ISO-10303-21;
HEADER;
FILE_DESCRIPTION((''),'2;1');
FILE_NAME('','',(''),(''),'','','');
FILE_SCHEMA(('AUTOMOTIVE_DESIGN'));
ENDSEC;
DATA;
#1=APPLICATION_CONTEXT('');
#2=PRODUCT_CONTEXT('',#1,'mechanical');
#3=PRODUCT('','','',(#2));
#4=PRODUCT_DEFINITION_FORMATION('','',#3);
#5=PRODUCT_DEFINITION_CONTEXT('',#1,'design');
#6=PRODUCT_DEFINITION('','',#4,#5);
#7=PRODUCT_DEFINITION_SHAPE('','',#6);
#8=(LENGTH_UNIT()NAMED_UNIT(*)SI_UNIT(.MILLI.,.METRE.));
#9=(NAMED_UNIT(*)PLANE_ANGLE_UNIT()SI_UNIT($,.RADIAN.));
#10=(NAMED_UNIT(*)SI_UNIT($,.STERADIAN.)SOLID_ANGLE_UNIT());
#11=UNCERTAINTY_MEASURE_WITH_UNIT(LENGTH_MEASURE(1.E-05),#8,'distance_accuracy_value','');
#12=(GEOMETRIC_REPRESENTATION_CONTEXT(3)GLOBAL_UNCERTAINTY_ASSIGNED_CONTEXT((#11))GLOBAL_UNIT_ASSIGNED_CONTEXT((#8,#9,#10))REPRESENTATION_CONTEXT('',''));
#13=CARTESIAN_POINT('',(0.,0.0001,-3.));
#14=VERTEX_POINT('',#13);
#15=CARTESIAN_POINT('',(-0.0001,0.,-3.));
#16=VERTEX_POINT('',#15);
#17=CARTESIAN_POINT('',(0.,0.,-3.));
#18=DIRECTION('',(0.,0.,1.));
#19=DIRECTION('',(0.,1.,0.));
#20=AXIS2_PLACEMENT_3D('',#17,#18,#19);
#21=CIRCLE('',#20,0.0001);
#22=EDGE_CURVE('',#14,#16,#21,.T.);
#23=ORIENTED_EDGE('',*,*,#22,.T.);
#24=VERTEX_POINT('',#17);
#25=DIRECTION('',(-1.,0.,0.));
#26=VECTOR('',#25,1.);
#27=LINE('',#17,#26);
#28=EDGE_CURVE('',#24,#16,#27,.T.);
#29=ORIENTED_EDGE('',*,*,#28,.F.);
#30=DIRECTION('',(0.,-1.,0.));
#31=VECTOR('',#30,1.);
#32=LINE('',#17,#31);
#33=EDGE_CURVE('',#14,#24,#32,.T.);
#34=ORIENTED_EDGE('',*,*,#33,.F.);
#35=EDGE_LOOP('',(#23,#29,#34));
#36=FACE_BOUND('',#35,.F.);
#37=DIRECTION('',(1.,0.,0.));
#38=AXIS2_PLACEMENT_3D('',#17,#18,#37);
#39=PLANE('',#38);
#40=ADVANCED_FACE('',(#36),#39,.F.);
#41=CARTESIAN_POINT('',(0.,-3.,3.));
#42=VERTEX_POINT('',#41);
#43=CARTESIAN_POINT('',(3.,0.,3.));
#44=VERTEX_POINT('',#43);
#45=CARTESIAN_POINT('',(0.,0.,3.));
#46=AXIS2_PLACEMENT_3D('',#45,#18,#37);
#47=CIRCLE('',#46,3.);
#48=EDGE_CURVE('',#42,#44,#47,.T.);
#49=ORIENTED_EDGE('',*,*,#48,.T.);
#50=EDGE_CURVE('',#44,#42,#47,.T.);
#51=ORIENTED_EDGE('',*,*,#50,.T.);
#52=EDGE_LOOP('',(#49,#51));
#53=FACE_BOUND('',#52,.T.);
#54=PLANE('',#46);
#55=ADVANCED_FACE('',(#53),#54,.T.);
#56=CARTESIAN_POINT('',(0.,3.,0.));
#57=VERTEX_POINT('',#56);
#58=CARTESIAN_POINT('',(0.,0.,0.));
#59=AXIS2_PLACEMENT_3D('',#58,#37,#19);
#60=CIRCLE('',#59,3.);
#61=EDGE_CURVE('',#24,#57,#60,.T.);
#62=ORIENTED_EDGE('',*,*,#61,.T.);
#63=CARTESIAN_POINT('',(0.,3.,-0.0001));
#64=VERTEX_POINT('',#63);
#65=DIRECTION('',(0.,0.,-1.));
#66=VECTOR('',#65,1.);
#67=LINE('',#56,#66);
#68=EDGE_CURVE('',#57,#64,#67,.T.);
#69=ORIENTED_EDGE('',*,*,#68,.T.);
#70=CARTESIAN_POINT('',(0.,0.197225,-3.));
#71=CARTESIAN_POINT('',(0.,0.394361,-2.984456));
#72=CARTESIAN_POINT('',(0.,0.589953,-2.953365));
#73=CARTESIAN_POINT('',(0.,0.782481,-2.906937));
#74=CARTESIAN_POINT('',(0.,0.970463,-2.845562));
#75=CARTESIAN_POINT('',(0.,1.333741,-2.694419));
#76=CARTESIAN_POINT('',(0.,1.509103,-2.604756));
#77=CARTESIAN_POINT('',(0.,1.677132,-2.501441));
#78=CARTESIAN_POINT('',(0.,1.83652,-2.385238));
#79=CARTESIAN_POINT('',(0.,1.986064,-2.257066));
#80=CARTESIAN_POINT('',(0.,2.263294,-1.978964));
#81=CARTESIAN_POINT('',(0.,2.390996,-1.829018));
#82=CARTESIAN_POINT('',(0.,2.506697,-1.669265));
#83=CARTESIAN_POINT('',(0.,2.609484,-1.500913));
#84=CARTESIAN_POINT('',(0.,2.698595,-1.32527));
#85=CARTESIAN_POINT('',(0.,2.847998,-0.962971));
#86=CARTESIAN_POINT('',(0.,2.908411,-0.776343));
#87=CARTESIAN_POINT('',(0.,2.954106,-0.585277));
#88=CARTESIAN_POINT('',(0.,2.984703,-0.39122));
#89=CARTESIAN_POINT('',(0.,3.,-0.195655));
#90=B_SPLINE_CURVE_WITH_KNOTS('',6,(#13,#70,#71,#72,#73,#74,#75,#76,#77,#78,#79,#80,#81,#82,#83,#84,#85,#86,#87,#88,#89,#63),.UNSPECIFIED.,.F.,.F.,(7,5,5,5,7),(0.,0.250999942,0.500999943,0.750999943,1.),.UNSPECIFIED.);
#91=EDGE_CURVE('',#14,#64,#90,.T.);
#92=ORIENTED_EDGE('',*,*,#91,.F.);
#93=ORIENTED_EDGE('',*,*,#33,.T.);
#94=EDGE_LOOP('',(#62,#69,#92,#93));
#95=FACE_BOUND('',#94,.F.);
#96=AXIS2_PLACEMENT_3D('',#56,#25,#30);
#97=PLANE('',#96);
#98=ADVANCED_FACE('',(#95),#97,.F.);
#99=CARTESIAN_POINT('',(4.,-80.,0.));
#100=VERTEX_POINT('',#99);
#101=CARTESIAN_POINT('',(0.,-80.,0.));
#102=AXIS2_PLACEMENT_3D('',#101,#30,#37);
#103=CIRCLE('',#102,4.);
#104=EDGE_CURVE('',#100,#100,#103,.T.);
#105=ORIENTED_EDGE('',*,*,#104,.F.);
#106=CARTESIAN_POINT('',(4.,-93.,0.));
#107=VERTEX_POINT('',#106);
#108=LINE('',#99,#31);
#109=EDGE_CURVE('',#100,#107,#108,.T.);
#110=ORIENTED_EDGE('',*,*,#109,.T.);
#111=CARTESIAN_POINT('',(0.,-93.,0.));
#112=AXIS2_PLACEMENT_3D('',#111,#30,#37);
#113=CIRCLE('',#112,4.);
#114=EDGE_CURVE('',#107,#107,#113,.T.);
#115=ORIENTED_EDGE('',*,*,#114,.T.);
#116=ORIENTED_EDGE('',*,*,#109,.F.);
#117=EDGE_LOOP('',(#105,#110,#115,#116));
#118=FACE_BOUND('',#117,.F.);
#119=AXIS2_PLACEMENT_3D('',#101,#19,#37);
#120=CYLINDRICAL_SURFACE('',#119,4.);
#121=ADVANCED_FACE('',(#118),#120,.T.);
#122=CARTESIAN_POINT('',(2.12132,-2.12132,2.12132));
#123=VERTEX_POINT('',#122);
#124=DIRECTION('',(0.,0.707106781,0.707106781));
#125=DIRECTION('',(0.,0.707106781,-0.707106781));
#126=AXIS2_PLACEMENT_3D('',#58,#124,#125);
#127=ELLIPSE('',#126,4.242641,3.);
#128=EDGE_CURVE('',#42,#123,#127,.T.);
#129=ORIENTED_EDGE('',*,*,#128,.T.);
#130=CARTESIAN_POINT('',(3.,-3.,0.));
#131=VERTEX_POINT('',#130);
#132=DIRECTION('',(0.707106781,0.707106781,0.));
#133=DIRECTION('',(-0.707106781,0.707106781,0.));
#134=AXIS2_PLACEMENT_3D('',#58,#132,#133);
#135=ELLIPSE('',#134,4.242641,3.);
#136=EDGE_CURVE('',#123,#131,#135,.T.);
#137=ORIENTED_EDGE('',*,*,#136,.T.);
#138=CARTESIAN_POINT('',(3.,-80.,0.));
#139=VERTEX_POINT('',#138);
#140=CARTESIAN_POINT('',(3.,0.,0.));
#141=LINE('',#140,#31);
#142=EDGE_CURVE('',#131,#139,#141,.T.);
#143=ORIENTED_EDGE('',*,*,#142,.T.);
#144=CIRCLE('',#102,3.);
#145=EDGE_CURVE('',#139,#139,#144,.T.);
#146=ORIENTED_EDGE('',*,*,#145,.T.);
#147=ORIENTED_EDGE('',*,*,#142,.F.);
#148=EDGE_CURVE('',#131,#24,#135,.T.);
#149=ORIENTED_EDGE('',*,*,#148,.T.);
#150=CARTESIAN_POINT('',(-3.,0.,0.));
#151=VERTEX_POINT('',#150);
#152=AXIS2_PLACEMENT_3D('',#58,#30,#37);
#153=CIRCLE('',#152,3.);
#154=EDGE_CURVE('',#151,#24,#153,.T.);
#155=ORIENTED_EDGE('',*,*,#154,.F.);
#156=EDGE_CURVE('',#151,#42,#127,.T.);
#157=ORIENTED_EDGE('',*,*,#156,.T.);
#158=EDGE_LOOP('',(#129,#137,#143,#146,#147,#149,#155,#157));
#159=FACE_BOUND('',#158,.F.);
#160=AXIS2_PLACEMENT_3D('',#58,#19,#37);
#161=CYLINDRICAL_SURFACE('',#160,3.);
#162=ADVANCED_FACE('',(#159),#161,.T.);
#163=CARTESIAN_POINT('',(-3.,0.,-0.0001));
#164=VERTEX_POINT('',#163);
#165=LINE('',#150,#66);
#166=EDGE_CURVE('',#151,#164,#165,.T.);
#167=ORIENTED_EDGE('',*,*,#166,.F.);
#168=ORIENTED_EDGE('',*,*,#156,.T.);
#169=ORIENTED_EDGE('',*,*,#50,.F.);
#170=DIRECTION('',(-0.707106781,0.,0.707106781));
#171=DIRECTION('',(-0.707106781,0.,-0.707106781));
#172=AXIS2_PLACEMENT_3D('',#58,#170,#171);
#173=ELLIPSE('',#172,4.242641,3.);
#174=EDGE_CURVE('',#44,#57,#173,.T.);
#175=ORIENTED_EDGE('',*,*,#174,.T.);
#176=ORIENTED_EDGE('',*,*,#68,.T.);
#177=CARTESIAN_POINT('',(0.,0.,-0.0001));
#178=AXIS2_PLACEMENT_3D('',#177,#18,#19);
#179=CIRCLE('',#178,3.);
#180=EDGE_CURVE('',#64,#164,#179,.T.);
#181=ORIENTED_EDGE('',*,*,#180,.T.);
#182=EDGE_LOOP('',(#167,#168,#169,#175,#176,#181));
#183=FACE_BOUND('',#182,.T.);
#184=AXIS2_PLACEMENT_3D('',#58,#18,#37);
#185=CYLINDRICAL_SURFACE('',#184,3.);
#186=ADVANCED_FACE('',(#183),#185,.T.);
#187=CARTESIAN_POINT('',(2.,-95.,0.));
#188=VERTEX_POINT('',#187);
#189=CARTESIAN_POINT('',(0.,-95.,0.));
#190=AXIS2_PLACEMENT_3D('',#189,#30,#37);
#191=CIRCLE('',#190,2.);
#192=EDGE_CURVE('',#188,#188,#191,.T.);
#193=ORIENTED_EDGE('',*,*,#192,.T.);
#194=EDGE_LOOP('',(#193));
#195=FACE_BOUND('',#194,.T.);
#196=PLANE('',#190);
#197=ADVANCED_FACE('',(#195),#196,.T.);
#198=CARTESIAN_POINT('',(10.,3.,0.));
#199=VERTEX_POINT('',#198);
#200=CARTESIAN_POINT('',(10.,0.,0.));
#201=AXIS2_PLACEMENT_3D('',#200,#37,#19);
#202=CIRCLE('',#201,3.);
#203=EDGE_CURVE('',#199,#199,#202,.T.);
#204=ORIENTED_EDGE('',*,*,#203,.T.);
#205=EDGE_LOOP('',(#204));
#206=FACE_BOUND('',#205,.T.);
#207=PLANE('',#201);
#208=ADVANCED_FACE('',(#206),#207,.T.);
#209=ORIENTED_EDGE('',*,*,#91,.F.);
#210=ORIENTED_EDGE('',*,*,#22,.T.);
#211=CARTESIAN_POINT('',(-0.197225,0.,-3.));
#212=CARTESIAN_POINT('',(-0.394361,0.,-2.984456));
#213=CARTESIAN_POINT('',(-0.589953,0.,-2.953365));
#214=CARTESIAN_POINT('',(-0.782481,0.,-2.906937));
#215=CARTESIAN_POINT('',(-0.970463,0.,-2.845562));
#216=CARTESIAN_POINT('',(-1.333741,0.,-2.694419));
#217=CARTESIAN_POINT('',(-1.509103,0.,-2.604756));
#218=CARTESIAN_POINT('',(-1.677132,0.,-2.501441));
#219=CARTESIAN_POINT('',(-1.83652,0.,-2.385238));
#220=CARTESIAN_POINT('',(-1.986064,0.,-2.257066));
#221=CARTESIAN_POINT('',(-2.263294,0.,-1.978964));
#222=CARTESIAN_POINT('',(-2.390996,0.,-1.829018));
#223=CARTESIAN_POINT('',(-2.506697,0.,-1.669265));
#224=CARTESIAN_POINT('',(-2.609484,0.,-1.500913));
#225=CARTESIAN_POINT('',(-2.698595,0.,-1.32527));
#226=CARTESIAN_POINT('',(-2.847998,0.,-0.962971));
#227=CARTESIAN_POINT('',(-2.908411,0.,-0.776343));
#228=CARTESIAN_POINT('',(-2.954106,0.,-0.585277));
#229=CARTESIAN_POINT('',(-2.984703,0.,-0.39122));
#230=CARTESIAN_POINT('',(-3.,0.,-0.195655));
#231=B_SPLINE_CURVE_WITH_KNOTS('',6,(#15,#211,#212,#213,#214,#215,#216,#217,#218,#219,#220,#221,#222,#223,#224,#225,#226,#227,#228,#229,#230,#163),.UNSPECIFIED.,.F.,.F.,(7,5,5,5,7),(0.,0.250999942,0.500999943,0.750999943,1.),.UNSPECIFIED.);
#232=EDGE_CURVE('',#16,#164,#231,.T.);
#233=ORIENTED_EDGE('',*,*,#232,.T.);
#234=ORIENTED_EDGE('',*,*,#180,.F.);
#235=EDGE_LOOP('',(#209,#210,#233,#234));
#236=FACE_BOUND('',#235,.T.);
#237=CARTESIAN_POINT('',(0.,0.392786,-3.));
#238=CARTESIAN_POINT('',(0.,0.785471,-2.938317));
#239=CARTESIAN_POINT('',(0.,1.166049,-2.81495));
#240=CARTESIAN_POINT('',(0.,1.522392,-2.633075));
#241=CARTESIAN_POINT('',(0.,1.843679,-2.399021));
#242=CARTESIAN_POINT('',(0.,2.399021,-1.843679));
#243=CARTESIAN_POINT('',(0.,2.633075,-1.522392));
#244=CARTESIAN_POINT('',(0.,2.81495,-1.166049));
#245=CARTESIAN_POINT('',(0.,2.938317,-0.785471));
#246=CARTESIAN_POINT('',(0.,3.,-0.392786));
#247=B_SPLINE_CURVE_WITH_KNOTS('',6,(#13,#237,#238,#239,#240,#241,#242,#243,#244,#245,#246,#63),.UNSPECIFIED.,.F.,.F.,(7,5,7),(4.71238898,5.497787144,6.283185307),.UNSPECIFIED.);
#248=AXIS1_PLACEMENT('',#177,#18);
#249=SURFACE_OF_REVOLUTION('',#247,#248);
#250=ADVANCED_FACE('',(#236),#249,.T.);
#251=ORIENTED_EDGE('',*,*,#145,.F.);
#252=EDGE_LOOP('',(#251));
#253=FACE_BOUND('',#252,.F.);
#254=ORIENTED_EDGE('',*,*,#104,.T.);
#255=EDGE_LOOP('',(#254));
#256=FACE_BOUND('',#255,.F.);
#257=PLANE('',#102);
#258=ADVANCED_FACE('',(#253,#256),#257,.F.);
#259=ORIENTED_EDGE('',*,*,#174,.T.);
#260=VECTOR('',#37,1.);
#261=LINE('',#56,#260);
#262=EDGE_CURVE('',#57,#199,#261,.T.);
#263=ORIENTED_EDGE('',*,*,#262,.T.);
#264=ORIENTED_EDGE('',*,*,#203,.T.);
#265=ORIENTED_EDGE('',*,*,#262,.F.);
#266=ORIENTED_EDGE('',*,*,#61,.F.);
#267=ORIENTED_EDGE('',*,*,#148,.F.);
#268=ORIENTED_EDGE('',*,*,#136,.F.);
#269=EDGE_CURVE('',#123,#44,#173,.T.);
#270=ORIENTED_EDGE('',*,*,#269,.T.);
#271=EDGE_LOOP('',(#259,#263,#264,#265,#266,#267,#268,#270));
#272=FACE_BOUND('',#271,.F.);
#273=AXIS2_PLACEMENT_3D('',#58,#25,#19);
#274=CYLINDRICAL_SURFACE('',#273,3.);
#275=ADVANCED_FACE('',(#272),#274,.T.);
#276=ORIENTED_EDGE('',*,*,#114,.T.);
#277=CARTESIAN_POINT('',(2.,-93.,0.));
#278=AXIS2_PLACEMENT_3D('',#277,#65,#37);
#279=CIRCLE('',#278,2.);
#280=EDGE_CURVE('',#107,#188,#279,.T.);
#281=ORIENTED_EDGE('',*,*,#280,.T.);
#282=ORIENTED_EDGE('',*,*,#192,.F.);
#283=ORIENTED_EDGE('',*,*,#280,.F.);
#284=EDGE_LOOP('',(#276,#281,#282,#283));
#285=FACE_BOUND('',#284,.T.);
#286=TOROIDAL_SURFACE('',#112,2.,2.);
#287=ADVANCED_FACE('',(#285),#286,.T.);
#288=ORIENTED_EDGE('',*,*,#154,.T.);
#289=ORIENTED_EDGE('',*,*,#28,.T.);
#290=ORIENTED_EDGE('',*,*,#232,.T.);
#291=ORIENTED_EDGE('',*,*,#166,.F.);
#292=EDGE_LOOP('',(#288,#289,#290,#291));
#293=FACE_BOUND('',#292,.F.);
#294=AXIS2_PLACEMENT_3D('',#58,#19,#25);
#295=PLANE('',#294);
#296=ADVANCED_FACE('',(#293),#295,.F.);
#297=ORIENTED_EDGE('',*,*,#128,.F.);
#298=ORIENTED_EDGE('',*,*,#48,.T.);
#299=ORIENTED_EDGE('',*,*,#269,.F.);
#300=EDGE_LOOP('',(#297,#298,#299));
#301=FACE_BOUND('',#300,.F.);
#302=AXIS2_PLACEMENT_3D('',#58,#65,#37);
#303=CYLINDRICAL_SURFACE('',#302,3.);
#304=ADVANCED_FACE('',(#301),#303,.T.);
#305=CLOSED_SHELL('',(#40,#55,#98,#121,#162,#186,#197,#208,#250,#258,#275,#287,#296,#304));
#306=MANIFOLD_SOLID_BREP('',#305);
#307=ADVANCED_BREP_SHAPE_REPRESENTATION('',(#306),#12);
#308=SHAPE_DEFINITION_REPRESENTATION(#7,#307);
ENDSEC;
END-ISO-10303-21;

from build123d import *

# Parameters (mm, degrees)
F0_R     = 3
F1_DEPTH = 80
F2_R     = 4
F2_R_2   = 3
F3_DEPTH = 15
F4_R     = 2
F5_R     = 3
F6_DEPTH = 10
F7_R     = 3
F8_DEPTH = 3
F9_DEPTH = 3
F10_R    = 2.9999


# Not quite as in the source:
# - a fillet or chamfer is up to 0.001 mm smaller than in the source, because OpenCascade refuses the exact size


with BuildPart() as f1:
    # F0 (on Front) → F1 (new body)
    with BuildSketch(Plane.XZ):
        Circle(F0_R)
    extrude(amount=F1_DEPTH)

    # F2 (on face) → F3 (join)
    with BuildSketch(Plane.XZ.offset(80)):
        Circle(F2_R)
        Circle(F2_R_2, mode=Mode.SUBTRACT)
        Circle(F2_R_2)
    extrude(amount=F3_DEPTH)

    # F4
    f4_edges = [f1.edges().sort_by_distance(p)[0] for p in [
        (-4, -95, 0),
    ]]
    fillet(f4_edges, radius=F4_R)

    # F5 (on Right) → F6 (join)
    with BuildSketch(Plane.YZ):
        Circle(F5_R)
    extrude(amount=F6_DEPTH)

    # F7 (on Top) → F8 (join)
    with BuildSketch(Plane.XY):
        Circle(F7_R)
    extrude(amount=F8_DEPTH)

    # F9 (add): a face of the model
    f9_faces = [f1.faces().sort_by_distance(p)[0] for p in [
        (-1.2732395447, 1.2732395447, 0),
    ]]
    extrude(f9_faces, amount=F9_DEPTH)

    # F10 (radius 3 in the source; OpenCascade refuses exactly that, so slightly less here)
    f10_edges = [f1.edges().sort_by_distance(p)[0] for p in [
        (-2.12132, 2.12132, -3),
    ]]
    fillet(f10_edges, radius=F10_R)


solid = f1.part
